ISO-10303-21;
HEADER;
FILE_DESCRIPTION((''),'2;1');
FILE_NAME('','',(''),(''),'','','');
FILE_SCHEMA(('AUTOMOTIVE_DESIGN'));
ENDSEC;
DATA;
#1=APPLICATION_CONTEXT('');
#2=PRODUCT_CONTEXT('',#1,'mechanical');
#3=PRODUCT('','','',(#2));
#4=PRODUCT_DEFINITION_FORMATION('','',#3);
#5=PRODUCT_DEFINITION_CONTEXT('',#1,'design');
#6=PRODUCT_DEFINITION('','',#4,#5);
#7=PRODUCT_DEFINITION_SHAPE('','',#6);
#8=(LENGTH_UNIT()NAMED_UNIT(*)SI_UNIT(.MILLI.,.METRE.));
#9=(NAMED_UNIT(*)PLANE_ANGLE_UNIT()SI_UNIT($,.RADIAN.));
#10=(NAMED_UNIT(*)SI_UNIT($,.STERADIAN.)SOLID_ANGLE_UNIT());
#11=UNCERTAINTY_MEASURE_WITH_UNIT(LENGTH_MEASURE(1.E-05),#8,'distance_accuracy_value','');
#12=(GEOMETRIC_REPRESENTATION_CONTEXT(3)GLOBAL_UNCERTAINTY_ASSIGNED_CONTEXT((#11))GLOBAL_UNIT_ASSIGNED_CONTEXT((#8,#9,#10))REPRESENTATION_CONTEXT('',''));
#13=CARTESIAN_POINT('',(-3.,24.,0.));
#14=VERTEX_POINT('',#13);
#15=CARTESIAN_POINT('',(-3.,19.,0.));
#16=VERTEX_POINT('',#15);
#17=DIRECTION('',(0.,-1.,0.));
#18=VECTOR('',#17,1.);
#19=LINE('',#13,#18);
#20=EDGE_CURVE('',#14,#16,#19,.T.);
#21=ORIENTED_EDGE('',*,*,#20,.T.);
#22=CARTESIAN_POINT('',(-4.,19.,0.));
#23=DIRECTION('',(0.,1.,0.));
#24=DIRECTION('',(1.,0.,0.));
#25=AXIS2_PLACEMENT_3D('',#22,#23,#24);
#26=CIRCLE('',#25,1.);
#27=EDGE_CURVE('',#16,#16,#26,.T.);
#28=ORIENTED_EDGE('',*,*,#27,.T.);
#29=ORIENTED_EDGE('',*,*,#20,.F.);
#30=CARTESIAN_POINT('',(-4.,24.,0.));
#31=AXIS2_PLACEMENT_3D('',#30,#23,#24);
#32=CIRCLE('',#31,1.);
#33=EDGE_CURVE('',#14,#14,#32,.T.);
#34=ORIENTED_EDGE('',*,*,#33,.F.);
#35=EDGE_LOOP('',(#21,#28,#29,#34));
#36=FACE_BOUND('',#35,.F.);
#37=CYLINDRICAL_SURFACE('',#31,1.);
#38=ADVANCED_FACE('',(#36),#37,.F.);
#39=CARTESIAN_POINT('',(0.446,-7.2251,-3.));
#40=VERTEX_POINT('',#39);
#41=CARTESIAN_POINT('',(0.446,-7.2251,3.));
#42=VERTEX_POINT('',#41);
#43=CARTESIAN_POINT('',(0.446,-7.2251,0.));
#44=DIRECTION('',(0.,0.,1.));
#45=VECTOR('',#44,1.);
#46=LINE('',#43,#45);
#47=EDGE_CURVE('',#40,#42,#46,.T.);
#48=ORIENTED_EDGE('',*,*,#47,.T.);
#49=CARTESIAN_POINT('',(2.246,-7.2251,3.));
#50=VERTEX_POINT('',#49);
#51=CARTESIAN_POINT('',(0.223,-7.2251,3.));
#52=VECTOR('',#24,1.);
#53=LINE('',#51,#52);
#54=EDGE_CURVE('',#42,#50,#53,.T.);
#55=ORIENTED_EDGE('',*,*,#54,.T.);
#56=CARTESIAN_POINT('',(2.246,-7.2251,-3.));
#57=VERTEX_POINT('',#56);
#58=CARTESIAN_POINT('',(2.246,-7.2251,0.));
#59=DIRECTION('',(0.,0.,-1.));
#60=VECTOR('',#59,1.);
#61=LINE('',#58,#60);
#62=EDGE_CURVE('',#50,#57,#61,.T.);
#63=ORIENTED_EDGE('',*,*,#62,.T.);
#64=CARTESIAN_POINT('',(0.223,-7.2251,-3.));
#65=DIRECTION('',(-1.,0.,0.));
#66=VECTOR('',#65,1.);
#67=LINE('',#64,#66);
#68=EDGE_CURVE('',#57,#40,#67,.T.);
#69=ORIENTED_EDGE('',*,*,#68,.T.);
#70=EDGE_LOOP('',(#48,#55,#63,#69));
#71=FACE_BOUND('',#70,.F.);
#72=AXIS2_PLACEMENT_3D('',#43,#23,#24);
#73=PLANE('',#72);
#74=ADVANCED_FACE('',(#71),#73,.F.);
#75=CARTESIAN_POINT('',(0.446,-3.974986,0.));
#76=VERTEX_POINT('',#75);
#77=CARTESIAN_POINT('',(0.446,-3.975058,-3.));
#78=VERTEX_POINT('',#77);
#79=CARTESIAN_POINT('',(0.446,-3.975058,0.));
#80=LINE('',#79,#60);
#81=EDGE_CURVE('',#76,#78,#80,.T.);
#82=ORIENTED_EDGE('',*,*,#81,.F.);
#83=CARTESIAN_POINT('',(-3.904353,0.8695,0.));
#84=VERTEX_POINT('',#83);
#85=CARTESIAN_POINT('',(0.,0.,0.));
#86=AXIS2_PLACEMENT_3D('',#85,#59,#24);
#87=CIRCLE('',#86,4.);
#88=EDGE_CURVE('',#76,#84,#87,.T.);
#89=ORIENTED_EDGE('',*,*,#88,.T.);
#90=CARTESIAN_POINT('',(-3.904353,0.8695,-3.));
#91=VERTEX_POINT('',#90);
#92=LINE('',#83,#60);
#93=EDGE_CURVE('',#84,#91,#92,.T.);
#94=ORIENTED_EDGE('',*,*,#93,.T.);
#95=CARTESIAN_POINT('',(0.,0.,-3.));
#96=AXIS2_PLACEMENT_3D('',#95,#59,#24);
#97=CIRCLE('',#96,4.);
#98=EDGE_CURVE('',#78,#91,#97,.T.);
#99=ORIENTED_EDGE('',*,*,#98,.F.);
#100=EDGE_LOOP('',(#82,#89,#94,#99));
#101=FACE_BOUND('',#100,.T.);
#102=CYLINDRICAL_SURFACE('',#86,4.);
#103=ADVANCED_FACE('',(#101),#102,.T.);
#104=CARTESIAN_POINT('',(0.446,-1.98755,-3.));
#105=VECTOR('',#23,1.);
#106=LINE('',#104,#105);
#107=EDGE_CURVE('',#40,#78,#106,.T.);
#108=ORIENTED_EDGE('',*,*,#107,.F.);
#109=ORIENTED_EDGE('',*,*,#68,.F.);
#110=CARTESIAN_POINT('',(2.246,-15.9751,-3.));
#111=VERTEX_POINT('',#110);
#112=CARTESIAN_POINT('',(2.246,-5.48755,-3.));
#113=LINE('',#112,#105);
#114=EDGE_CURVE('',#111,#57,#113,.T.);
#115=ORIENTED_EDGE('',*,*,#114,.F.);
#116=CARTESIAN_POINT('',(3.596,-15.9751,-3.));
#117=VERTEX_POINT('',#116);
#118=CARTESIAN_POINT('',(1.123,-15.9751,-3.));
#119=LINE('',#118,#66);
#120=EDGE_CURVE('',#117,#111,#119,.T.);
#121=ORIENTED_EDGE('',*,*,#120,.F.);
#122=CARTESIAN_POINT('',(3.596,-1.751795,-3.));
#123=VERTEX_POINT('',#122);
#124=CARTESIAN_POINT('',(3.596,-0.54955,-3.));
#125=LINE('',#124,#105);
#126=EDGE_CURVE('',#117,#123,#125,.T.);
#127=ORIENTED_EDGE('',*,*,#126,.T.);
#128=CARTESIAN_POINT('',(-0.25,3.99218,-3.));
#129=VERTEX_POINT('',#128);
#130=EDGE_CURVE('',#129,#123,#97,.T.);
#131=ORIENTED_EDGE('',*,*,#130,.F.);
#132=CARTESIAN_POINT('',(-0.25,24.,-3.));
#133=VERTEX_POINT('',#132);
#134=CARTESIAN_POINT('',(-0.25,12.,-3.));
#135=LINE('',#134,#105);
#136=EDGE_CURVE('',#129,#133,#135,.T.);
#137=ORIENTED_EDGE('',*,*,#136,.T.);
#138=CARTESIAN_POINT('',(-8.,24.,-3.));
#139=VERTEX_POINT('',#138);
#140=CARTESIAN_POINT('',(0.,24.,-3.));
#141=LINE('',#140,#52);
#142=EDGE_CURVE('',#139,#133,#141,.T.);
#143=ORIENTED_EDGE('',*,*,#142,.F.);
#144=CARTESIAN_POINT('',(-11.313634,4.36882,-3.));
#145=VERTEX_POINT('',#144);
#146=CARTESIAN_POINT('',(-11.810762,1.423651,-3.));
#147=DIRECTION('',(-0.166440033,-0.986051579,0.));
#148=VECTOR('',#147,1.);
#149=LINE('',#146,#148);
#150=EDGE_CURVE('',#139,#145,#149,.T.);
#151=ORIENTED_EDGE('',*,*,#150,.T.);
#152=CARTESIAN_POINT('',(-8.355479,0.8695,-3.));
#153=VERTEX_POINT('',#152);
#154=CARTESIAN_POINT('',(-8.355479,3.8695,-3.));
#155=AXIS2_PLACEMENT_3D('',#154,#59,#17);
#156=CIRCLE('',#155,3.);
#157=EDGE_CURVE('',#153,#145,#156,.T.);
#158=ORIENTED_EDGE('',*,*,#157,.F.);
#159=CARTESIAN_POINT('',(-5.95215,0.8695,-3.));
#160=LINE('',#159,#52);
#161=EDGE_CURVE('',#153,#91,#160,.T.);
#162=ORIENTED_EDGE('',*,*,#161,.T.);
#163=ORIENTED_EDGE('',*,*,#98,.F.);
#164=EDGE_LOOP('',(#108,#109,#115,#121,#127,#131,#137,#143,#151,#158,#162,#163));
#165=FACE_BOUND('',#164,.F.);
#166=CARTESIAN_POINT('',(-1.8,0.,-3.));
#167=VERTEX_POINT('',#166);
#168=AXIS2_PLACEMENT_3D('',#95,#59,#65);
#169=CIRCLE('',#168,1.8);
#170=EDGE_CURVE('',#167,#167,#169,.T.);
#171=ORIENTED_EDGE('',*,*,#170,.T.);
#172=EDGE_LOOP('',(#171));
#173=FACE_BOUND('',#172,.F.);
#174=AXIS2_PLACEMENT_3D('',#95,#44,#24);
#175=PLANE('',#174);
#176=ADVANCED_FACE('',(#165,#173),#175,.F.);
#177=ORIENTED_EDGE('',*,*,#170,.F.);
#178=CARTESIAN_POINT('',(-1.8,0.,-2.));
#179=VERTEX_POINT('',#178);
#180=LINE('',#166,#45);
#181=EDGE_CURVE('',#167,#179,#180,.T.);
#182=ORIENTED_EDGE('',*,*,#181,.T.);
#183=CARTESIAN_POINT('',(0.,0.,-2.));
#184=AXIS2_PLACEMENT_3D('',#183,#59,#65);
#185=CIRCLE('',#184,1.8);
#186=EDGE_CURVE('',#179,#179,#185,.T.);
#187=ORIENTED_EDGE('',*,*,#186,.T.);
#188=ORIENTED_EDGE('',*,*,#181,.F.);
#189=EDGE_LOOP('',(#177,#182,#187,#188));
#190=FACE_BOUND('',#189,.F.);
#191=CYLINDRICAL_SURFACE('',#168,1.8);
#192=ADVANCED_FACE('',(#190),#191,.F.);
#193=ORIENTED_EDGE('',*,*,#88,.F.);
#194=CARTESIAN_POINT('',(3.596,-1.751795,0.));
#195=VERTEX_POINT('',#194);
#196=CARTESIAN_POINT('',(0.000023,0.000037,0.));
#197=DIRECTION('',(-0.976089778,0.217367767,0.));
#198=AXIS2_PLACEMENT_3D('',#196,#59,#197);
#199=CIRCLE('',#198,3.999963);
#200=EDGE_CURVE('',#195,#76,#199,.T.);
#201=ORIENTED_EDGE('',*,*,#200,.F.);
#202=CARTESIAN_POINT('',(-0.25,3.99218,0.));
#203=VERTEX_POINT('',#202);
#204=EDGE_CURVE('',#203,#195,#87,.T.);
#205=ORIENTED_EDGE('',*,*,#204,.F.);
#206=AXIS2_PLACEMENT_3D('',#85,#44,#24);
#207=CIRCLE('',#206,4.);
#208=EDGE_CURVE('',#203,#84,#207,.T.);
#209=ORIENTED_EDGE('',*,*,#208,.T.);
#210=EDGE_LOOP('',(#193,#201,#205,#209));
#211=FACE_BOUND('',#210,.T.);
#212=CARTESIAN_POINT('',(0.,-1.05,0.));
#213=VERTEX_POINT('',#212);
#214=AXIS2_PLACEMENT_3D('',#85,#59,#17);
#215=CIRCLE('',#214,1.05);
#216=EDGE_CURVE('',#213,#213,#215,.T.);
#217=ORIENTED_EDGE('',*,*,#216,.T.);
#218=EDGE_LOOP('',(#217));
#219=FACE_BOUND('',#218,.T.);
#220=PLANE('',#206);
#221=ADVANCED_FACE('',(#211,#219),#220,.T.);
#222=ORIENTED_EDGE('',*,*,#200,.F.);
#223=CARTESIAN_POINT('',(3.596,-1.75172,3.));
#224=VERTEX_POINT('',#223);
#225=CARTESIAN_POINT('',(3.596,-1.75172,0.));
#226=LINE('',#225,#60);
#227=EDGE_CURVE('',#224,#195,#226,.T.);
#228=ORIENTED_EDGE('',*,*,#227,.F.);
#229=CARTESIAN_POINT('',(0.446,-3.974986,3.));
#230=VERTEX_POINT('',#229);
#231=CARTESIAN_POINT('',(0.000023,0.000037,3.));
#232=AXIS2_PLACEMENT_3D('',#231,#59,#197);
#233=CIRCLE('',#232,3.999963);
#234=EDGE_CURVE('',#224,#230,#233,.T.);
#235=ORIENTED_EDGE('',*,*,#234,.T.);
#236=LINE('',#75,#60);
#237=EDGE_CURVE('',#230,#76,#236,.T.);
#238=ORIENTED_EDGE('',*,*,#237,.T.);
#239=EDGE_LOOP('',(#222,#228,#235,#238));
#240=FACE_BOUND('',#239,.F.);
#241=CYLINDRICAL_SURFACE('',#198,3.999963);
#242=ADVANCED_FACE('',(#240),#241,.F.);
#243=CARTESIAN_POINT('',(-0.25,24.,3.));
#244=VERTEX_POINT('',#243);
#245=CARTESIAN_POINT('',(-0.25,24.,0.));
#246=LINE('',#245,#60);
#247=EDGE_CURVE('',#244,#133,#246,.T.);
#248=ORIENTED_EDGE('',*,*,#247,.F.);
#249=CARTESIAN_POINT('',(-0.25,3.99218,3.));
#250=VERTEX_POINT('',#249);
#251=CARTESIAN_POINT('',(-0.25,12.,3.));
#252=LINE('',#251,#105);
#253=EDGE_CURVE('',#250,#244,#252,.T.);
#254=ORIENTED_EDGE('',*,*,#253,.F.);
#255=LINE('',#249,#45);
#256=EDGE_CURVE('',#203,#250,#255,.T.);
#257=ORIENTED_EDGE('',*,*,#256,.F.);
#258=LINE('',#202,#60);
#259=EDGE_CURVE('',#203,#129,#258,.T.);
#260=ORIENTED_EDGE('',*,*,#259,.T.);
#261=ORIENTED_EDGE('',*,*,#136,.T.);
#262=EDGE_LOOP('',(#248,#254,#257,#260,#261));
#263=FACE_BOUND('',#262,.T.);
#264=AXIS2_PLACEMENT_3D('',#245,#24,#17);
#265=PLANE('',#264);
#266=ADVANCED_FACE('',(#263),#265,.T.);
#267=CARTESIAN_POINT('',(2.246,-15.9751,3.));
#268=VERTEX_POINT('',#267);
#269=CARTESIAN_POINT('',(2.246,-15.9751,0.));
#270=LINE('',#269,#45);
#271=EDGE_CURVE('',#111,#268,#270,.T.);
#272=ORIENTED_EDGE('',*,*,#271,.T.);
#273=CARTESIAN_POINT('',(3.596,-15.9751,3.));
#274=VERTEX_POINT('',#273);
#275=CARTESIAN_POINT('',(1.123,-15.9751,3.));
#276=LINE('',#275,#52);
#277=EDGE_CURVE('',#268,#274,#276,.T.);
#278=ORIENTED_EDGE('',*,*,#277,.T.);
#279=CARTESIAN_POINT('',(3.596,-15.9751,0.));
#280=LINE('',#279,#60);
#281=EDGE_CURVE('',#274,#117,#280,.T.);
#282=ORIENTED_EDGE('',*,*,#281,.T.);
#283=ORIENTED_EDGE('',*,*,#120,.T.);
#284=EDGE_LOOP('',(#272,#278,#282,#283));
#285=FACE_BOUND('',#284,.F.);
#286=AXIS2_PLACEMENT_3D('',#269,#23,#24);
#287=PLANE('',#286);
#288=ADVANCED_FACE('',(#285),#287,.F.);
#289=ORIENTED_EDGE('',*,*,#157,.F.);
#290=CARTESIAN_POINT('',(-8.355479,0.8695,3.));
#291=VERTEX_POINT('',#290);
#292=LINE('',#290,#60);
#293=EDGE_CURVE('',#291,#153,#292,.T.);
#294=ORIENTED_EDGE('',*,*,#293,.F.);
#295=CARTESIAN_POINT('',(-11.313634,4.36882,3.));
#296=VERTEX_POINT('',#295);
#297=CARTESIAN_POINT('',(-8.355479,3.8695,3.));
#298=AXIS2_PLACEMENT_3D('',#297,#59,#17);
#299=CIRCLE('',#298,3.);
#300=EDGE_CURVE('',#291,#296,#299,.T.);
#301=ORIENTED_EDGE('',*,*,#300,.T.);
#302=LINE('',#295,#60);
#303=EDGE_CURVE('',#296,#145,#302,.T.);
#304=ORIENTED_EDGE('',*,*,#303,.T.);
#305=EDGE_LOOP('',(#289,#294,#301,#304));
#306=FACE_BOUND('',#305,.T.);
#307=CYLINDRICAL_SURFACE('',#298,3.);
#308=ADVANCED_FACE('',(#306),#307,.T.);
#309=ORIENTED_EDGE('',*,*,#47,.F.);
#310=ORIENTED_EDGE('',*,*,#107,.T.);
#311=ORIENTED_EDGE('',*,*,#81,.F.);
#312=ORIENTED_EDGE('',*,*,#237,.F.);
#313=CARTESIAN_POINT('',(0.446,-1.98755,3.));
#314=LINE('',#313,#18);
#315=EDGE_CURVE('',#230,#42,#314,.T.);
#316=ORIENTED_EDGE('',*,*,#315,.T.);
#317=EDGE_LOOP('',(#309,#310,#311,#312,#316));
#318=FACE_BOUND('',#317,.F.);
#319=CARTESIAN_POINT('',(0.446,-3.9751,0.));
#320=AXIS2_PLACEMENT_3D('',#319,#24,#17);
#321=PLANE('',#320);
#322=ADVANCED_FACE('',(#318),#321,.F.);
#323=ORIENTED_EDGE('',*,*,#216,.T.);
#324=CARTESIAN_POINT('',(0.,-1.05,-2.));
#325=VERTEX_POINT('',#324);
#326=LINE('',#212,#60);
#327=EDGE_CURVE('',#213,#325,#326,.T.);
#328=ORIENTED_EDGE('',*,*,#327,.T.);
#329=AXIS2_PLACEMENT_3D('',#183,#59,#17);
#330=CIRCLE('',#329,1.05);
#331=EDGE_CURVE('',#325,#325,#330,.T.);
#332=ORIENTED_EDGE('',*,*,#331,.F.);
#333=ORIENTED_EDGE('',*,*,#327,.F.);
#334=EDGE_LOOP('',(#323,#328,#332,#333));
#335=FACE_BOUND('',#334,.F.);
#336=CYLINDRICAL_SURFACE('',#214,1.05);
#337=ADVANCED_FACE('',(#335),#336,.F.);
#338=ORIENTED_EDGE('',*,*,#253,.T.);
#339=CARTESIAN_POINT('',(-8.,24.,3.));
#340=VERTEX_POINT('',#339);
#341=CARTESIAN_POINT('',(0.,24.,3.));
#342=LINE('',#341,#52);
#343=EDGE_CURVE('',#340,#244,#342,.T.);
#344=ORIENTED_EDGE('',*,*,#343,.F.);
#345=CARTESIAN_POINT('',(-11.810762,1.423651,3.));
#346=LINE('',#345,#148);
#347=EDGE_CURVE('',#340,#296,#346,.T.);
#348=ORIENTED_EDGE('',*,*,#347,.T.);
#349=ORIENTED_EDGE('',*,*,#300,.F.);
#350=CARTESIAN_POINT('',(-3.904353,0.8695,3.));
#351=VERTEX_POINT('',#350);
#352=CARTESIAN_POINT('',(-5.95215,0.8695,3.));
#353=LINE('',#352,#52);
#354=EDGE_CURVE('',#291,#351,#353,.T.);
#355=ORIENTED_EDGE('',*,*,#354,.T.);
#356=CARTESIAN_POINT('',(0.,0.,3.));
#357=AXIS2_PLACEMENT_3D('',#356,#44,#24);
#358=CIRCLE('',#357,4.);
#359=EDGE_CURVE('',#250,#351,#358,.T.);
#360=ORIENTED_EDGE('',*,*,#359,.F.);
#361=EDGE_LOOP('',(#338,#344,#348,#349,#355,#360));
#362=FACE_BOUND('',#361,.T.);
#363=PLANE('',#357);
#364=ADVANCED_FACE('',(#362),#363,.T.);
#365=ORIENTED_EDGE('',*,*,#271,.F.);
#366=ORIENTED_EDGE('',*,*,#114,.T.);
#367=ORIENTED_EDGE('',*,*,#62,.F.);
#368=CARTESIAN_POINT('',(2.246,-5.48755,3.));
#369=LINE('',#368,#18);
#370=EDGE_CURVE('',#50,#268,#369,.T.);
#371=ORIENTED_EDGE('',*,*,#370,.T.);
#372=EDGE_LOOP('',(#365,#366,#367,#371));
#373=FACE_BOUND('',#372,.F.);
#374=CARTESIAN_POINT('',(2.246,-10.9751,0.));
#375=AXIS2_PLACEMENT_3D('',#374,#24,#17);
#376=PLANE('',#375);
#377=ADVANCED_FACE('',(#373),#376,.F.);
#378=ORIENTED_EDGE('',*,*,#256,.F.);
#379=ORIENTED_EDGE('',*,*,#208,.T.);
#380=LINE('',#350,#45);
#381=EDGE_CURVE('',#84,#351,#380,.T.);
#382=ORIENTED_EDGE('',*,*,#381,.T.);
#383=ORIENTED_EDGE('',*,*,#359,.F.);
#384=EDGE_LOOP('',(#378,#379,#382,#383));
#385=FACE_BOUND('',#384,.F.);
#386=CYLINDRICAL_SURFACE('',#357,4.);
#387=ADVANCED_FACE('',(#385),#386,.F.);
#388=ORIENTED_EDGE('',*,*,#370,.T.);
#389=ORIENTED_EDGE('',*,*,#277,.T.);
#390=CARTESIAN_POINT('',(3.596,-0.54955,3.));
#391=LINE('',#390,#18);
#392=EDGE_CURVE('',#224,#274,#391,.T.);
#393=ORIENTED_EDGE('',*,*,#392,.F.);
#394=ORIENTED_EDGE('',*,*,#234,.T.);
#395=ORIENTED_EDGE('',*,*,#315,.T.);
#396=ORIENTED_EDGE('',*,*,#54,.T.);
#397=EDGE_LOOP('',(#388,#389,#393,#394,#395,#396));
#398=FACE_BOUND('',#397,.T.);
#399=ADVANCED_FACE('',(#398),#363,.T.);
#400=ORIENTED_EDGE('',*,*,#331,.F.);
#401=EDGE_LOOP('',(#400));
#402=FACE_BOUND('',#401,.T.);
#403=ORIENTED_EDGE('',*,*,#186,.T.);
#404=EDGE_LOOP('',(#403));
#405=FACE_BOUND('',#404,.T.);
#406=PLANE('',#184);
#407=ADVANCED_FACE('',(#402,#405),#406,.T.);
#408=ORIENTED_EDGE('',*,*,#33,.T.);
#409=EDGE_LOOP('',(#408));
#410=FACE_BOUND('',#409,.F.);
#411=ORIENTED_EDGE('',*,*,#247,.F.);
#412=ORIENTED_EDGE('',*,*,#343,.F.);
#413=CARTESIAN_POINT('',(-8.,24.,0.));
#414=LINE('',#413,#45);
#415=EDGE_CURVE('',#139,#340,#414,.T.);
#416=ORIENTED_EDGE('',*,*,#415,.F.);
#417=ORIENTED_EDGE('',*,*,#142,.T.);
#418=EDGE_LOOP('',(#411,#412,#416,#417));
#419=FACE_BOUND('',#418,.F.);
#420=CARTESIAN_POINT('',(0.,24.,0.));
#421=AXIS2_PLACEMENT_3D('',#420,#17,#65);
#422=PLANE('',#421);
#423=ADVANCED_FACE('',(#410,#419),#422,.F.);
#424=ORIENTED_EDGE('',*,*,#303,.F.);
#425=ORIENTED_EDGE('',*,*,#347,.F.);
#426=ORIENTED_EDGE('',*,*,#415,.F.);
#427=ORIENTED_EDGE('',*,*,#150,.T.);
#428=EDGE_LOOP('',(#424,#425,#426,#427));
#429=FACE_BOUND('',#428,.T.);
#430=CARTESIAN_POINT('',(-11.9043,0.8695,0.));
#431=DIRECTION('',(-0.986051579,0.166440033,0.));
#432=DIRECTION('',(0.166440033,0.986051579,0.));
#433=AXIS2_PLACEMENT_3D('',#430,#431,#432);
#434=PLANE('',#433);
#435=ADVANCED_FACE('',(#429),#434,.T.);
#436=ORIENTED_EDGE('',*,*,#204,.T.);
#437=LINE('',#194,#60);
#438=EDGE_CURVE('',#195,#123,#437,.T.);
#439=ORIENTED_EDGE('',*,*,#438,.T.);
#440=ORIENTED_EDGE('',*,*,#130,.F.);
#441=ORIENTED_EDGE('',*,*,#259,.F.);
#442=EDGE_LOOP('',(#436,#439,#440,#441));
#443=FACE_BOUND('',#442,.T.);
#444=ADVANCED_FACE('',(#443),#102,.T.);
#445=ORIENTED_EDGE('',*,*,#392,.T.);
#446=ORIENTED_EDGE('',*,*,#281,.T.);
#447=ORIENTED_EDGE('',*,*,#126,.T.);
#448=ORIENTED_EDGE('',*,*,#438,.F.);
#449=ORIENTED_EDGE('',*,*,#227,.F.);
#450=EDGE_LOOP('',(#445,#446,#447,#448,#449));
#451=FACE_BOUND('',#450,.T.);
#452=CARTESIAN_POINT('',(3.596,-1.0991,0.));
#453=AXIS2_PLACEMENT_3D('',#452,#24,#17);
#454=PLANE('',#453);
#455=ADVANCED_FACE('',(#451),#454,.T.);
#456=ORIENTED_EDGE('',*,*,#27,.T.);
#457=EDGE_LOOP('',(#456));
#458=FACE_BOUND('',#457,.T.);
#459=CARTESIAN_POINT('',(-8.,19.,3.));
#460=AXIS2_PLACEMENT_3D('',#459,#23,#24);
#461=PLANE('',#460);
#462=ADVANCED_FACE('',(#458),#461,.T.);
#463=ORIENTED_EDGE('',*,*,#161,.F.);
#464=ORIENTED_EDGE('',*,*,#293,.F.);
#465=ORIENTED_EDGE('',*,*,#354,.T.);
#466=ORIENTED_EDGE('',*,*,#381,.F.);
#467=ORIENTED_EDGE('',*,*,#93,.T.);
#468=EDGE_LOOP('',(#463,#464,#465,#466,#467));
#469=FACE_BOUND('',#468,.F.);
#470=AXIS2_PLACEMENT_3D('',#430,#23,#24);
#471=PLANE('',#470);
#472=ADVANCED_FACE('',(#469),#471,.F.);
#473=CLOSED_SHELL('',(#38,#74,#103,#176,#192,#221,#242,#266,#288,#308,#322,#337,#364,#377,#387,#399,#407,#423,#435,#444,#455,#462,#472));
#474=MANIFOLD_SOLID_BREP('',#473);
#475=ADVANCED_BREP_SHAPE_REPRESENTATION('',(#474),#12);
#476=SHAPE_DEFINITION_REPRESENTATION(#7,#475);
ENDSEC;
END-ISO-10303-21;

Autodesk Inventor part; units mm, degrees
ref_plane "YZ Plane" through (0, 0, 0) normal (1, 0, 0) x (0, 1, 0)
ref_plane "XZ Plane" through (0, 0, 0) normal (0, 1, 0) x (-1, 0, 0)
ref_plane "XY Plane" through (0, 0, 0) normal (0, 0, 1) x (1, 0, 0)
sketch "Sketch1" plane through (0, 0, 0) normal (0, 0, 1) x (1, 0, 0)
  circle A0 centre (0, 0) radius 4
  line L0 (0, 24) -> (-8, 24)
  line L1 (0, 24) -> (0, 4)
  line L2 (-11.9043, 0.8695) -> (-3.9043, 0.8695)
  line L3 (-11.9043, 0.8695) -> (-8, 24)
  dimension "d9" = 6
  dimension "d0" = 8
  dimension "d6" = 8
  dimension "d94" = 20
  dimension "d95" = 8
extrude "Extrusion1" add sketch "Sketch1" along normal mid plane 6
sketch "Sketch2" plane through (0, 0, 3) normal (0, 0, 1) x (1, 0, 0)
  circle A0 centre (0, 0) radius 4
extrude "Extrusion2" cut sketch "Sketch2" against normal blind 3
sketch "Sketch4" plane through (-8, 24, 3) normal (0, 1, 0) x (1, 0, 0)
  line L0 (8, 6) -> (8, 0) projected
  line L1 (0, 0) -> (8, 6)
  line L2 (8, 0) -> (0, 0) projected
  line L3 (0, 6) -> (0, 0) projected
  line L4 (8, 0) -> (0, 6)
  circle A0 centre (4, 3) radius 1
  point P0 (8, 3)
  point P1 (3.2, 2.4)
  point P2 (3.2, 3.6)
  dimension "d9" = 6
  dimension "d17" = 2
  dimension "d93" = 1.2
extrude "Extrusion4" cut sketch "Sketch4" against normal blind 5 contours A0 L4 L1 | L1 L4 A0 | A0 L1 L4 | L1 A0 L4
sketch "Sketch8" plane through (0, 0, 0) normal (0, 0, 1) x (1, 0, 0)
  arc A0 (-3.9043, 0.8695) -> (0, 4) centre (0, 0) ccw projected
  dimension "d9" = 6
hole "Hole3" at (0, 0, 0) direction (0, 0, -1) diameter 2.1 end through all
sketch "Sketch9" plane through (0, 0, 0) normal (0, 0, 1) x (1, 0, 0)
  line L0 (0, 4) -> (0, 24) construction
  line L1 (0, 24) -> (-8, 24) construction
  line L2 (-3.2679, 22.7321) -> (-9.3121, 0.175) construction
  line L3 (-11.9043, 0.8695) -> (-3.9043, 0.8695) construction
  arc A0 (0, 4) -> (-3.9043, 0.8695) centre (0, 0) ccw construction
  arc A1 (-3.9043, 0.8695) -> (0, 4) centre (0, 0) ccw projected
  line L4 (0, 31.995) -> (0, -23.9701) construction
  arc A2 (-3.9043, 0.8695) -> (0, 4) centre (0, 0) ccw construction
  line L5 (0.446, -3.9751) -> (0.446, -10.9751)
  line L6 (3.846, -1.0991) -> (3.846, -15.9751)
  line L7 (0.446, -10.9751) -> (2.246, -10.9751)
  line L8 (2.246, -10.9751) -> (2.246, -15.9751)
  line L9 (2.246, -15.9751) -> (3.846, -15.9751)
  point P0 (0.446, -3.9751)
  dimension "d9" = 6
  dimension "d90" = 7
  dimension "d91" = 3.4
  dimension "d92" = 1.8
extrude "Extrusion5" add sketch "Sketch9" along normal mid plane 6
sketch "Sketch10" plane through (0, 0, -3) normal (0, 0, -1) x (-1, 0, 0)
  circle A0 centre (0, 0) radius 1.05 projected
  circle A1 centre (0, 0) radius 1.8
  dimension "d9" = 6
  dimension "d62" = 3.6
extrude "Extrusion6" cut sketch "Sketch10" against normal blind 1
fillet "Fillet2" radius 3 1 edges at (-11.9043, 0.8695, 0)
move faces "Move1" translate (-0.25, 0, 0) faces at (3.846, -11.0164, 0)
move faces "Move2" translate (-0.25, 0, 0) faces at (0, 17.3333, 0)
move faces "Move3" translate (0, 3.75, 0) faces at (1.646, -10.9751, 1)
properties part number "pliers" material "ABS Plastic"
